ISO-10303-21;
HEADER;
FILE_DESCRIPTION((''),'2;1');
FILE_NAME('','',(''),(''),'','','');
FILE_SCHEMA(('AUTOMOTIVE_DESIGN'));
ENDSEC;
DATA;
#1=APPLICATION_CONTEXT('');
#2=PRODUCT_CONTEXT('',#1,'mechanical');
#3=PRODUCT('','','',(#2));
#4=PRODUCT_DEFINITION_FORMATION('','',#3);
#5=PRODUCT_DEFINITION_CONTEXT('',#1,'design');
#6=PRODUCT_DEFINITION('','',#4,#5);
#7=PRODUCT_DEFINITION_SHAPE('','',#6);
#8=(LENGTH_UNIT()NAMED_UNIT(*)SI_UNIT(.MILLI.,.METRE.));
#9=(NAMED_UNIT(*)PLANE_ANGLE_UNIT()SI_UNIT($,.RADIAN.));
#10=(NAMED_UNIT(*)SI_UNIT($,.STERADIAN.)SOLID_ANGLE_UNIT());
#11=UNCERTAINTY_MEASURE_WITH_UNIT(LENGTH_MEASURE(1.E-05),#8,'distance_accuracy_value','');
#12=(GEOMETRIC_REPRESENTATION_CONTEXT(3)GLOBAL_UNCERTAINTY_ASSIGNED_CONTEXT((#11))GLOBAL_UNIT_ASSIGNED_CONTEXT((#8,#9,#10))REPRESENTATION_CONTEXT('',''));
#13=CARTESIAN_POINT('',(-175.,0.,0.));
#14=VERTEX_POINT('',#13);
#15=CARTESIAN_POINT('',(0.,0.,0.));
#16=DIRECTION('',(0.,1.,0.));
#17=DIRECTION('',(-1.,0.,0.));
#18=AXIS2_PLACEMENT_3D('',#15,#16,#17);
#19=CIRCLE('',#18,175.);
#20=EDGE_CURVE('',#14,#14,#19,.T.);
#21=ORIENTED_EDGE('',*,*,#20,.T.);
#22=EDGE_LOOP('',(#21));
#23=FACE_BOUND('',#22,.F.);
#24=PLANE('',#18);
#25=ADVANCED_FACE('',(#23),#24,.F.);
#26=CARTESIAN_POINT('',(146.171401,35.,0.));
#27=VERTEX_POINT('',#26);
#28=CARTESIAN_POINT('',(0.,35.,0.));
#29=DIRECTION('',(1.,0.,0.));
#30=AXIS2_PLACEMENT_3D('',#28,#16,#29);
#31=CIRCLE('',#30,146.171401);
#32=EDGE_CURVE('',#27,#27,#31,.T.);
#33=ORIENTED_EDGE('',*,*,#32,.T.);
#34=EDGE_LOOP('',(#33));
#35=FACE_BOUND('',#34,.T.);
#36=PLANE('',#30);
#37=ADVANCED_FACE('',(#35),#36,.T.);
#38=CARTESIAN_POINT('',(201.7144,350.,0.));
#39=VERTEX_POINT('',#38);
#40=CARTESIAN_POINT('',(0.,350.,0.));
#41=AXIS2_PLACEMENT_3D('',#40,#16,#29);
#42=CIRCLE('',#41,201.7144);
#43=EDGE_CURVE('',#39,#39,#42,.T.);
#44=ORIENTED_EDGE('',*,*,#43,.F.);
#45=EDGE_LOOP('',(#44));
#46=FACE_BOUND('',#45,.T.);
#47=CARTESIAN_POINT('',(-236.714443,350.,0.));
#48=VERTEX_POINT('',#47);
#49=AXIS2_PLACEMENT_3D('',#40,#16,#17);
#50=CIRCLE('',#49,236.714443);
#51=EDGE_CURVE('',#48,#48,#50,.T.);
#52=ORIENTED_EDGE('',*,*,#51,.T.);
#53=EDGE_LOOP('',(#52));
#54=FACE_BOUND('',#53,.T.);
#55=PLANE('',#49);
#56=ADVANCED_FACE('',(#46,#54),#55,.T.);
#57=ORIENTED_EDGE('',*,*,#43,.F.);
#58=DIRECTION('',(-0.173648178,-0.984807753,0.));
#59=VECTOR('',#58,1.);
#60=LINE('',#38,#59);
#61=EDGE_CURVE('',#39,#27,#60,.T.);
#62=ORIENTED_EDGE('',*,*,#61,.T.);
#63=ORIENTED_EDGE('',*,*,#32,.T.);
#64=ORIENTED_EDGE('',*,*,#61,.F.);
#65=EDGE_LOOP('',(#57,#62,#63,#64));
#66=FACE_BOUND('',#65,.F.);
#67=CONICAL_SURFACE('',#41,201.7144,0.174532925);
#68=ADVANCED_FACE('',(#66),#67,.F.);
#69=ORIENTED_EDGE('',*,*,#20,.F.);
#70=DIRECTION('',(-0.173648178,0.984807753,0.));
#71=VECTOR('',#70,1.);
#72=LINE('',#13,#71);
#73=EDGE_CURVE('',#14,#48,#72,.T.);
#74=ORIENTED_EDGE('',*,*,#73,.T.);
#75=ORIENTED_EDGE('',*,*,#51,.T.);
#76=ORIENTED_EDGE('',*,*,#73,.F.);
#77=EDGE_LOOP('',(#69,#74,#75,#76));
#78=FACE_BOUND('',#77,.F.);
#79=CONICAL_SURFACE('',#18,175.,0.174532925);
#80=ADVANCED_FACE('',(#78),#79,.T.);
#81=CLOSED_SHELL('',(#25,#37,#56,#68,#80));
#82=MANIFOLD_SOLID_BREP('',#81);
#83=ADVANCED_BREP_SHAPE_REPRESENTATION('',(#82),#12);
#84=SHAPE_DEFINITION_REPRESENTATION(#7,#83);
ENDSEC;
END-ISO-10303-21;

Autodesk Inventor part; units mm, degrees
ref_plane "YZ Plane" through (0, 0, 0) normal (1, 0, 0) x (0, 1, 0)
ref_plane "XZ Plane" through (0, 0, 0) normal (0, 1, 0) x (-1, 0, 0)
ref_plane "XY Plane" through (0, 0, 0) normal (0, 0, 1) x (1, 0, 0)
sketch "Sketch1" plane through (0, 0, 0) normal (0, 1, 0) x (-1, 0, 0)
  circle A0 centre (0, 0) radius 175
  dimension "d0" = 350
extrude "Extrusion1" add sketch "Sketch1" along normal blind 350 draft 10
sketch "Sketch3" plane through (0, 350, 0) normal (0, 1, 0) x (1, 0, 0)
  circle A0 centre (0, 0) radius 201.7144
  circle A1 centre (0, 0) radius 236.7144 projected
  dimension "d3" = 35
extrude "Extrusion2" cut sketch "Sketch3" against normal blind 315 draft -10 contours A0
properties part number "mortar2" material "Wood (Birch)"
